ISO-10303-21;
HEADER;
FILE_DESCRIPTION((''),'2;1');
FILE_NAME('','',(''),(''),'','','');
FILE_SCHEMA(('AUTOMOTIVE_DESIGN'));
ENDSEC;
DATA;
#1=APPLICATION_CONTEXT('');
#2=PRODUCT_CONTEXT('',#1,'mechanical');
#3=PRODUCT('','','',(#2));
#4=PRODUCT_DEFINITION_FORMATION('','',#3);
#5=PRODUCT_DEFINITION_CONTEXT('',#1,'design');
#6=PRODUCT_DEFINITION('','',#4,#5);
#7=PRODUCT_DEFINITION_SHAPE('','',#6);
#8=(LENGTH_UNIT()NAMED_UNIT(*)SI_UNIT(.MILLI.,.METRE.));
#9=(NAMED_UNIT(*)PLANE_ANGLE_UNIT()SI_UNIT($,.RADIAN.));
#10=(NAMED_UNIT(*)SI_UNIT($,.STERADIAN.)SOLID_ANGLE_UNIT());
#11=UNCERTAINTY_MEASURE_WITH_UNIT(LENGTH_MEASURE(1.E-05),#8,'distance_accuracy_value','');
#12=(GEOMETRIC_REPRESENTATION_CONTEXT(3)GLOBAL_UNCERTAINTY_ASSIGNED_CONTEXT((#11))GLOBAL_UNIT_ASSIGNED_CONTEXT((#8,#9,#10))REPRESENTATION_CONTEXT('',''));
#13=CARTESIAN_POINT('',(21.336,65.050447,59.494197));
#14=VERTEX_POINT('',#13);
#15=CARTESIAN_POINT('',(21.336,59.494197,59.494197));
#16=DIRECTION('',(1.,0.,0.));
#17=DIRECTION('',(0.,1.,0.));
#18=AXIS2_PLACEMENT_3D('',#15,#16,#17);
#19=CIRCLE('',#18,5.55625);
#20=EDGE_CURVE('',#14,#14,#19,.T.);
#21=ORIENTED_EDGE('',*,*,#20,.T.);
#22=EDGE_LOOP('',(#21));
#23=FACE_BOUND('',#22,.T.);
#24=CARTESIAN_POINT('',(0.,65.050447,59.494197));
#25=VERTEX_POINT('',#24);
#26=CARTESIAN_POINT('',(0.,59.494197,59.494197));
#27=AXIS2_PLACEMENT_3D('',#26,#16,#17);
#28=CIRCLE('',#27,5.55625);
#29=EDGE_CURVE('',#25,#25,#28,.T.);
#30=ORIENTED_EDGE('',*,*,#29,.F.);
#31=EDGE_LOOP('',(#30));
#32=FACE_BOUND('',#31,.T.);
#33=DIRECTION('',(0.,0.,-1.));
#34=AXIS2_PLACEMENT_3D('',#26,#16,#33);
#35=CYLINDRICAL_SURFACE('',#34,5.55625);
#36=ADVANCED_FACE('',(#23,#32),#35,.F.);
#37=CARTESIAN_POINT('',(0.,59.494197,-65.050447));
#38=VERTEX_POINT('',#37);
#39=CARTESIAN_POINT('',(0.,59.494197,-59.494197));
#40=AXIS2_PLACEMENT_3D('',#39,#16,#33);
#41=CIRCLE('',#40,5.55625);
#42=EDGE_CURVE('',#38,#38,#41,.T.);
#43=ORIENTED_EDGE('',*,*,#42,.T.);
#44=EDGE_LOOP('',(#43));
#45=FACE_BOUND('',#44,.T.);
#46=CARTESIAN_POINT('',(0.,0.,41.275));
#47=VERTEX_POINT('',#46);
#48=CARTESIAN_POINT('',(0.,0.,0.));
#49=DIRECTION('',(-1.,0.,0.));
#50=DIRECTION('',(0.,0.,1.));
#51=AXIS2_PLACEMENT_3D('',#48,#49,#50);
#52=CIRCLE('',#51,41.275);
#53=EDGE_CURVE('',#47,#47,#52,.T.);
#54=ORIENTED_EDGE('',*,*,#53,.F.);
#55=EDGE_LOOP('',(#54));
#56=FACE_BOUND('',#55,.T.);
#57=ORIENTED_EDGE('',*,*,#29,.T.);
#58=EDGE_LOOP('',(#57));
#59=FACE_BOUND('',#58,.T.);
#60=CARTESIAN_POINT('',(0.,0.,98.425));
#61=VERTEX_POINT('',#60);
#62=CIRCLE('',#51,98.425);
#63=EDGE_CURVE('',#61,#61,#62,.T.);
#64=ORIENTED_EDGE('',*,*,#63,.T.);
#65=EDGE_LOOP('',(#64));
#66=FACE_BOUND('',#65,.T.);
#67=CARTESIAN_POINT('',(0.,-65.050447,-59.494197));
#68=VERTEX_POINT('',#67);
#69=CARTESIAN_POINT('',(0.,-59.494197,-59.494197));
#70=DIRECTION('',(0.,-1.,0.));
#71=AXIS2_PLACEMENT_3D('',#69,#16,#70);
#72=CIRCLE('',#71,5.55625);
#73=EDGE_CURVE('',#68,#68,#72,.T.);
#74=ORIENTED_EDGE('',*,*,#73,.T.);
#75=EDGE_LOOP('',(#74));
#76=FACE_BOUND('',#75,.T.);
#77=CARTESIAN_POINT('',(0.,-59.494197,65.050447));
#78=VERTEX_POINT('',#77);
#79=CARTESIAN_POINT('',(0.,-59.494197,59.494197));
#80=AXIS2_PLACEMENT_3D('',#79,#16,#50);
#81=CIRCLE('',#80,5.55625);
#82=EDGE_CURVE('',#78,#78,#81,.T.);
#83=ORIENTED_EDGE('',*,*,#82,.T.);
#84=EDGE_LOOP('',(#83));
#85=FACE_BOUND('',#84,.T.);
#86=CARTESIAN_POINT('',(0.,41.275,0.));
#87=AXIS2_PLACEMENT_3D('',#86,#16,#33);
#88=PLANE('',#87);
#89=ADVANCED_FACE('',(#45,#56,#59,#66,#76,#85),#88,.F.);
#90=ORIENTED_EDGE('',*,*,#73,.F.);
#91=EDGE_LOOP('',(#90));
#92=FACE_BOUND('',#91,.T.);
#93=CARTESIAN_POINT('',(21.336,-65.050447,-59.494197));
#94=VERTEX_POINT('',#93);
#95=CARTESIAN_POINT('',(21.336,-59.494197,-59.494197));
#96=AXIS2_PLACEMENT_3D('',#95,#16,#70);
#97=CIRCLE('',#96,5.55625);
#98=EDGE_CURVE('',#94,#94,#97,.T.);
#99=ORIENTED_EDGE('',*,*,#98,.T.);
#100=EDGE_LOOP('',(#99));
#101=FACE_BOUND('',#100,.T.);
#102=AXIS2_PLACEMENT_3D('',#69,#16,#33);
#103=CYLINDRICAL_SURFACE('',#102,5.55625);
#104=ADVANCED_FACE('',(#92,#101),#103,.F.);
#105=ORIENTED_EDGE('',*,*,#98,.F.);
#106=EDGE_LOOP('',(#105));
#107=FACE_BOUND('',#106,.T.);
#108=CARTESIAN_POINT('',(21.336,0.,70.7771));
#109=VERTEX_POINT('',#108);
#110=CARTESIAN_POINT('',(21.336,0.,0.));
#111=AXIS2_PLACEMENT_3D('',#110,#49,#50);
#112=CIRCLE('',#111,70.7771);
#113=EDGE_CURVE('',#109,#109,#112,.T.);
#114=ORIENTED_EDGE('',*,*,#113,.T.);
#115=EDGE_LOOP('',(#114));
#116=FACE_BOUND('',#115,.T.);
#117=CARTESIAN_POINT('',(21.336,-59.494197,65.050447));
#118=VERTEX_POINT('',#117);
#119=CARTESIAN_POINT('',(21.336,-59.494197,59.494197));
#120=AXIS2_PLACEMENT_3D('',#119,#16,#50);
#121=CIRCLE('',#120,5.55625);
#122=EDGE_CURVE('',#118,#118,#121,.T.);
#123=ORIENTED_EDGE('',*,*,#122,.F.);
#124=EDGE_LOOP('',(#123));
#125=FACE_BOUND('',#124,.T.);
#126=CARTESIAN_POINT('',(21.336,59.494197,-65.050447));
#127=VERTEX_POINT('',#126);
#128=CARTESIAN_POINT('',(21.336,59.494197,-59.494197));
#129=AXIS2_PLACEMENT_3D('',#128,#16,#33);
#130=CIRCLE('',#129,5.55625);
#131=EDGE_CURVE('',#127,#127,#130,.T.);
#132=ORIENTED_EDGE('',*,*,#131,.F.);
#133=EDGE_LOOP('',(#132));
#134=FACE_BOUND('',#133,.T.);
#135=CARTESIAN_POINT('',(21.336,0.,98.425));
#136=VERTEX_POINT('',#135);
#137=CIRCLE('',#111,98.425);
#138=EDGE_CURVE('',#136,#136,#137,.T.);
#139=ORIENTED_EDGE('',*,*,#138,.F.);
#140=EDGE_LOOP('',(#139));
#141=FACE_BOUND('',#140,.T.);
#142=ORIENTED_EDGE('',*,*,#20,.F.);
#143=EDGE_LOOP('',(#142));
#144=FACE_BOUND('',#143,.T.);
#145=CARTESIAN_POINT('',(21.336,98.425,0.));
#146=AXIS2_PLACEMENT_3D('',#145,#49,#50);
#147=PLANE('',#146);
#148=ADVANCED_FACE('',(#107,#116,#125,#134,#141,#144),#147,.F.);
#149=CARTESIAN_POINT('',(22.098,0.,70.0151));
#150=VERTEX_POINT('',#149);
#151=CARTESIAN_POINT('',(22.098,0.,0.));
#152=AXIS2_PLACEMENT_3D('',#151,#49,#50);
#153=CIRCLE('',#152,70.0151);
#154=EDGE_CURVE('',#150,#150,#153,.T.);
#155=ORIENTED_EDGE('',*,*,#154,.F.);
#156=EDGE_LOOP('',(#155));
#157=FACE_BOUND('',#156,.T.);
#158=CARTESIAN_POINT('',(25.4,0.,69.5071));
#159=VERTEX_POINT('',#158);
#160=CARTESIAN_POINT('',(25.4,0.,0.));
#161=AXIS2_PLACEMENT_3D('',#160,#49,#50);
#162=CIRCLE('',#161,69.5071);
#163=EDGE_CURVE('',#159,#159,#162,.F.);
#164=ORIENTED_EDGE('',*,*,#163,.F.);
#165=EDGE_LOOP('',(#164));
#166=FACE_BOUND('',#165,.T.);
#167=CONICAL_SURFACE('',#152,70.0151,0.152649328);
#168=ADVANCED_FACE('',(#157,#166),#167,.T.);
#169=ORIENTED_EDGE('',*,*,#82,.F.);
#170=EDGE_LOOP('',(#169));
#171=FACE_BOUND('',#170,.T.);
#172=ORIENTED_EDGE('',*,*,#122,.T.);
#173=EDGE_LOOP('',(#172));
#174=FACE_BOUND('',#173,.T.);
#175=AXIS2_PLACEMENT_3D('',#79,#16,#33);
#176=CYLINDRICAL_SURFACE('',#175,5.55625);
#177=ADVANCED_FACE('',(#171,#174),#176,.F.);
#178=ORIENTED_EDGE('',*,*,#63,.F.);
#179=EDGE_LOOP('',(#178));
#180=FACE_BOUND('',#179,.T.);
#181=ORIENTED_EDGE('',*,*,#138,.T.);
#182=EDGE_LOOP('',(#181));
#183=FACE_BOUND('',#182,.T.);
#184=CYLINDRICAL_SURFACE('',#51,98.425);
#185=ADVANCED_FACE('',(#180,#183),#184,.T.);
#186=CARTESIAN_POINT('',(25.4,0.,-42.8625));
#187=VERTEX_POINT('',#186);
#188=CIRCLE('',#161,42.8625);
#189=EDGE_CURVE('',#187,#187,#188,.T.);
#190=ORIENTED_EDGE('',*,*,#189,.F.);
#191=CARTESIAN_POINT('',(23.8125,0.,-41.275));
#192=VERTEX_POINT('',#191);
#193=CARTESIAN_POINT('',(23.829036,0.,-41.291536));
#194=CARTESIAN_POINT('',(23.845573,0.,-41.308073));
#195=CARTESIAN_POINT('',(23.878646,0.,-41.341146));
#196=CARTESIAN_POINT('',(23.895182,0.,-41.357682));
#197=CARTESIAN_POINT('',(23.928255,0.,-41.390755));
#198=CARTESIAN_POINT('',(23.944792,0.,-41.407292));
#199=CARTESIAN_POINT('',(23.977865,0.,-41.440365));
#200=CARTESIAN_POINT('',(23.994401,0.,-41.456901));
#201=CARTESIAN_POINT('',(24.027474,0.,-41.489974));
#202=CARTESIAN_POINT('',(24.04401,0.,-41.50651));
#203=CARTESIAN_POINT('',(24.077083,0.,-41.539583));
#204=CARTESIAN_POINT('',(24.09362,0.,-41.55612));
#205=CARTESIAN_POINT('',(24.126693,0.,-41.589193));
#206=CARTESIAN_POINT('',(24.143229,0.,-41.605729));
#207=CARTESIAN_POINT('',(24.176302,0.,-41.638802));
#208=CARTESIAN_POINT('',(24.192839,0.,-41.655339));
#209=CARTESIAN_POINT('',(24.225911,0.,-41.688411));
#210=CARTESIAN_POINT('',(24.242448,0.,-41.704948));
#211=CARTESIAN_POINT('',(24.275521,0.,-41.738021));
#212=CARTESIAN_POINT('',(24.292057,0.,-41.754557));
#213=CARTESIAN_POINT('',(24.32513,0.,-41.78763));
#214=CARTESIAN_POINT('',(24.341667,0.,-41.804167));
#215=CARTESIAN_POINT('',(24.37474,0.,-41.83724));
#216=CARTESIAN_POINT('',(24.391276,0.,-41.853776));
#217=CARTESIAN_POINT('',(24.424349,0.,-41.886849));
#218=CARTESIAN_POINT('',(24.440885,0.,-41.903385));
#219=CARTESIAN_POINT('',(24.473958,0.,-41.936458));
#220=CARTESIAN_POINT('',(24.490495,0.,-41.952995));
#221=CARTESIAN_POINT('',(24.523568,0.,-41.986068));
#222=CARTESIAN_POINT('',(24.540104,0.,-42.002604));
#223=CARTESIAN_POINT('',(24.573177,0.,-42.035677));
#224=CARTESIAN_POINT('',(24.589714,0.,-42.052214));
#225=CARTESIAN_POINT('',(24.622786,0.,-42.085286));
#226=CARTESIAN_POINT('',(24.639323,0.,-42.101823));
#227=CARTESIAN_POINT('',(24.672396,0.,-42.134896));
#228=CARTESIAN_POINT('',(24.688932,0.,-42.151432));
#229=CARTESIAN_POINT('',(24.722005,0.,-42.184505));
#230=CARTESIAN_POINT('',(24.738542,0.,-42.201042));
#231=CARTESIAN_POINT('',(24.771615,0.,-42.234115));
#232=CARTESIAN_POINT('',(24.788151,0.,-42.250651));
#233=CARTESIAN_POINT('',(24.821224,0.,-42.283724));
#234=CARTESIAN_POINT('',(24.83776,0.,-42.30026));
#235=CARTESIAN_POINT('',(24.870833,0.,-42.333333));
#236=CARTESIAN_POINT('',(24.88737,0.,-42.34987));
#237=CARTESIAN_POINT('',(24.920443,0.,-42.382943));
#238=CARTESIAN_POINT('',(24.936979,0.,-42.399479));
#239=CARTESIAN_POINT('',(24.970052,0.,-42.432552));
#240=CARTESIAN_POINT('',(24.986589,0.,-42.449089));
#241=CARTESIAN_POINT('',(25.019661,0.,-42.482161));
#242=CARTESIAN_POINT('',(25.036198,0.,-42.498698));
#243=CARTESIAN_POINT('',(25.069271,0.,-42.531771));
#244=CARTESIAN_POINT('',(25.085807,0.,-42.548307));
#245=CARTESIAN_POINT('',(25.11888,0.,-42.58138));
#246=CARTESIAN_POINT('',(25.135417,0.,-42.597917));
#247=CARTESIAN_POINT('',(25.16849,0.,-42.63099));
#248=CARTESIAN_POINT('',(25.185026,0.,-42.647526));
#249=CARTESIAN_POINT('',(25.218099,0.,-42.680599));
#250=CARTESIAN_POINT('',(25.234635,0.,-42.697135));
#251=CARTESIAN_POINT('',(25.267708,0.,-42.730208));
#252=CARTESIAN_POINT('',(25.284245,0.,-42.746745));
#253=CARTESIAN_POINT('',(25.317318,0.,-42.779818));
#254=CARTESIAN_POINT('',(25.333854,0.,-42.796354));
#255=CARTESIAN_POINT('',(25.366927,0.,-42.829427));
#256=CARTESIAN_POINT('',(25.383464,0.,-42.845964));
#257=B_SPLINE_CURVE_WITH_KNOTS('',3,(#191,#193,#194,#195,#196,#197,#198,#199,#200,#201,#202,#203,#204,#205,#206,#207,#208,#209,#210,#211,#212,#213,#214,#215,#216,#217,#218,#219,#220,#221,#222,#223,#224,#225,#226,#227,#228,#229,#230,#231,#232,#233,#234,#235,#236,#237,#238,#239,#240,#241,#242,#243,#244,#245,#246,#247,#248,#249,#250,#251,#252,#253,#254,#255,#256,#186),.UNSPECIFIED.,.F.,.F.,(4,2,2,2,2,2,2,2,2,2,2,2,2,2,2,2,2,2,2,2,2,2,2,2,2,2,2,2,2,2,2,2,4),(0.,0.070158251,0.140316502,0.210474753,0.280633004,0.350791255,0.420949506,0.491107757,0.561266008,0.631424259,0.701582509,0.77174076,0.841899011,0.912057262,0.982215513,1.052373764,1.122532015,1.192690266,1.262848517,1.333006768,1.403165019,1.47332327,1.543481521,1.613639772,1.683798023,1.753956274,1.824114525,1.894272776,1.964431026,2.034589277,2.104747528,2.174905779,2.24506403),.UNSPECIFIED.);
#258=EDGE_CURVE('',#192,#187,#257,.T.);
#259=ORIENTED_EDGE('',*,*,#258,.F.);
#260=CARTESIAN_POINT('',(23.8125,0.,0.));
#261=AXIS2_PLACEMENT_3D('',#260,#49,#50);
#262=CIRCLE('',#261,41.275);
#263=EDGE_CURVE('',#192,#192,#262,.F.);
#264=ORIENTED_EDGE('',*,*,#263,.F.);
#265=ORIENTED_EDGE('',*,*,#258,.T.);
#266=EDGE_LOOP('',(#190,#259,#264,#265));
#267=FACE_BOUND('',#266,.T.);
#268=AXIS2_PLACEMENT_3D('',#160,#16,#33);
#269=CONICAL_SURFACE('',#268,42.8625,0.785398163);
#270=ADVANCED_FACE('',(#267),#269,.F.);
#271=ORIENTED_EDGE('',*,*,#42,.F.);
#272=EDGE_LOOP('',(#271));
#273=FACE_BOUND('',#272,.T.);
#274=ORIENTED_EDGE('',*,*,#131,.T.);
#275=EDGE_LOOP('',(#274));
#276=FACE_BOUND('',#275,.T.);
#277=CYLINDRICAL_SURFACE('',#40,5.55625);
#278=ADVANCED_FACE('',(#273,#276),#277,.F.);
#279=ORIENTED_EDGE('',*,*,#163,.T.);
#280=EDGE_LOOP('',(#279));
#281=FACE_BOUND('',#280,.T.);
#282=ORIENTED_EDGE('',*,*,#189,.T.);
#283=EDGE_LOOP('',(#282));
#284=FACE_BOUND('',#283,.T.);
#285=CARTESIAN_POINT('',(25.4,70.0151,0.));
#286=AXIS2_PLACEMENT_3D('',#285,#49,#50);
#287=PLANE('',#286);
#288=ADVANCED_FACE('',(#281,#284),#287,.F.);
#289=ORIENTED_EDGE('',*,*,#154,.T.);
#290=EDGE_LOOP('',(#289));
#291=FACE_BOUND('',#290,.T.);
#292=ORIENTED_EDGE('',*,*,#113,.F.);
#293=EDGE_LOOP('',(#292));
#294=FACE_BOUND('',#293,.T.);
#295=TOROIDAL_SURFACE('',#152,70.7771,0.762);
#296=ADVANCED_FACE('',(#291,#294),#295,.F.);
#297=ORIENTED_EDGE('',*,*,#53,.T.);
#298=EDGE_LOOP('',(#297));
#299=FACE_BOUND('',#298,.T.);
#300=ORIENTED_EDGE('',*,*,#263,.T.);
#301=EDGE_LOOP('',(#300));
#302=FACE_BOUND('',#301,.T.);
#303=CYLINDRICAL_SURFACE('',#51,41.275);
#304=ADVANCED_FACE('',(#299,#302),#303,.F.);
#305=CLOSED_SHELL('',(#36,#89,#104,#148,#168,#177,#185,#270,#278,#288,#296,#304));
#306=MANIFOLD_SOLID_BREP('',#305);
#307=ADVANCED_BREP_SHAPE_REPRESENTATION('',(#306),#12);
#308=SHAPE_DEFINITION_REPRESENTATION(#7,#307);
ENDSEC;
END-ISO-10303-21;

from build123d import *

# Parameters (mm, degrees)
SKETCH2_R          = 5.55625
CUT_EXTRUDE1_DEPTH = 141.819693743
CIRPATTERN1_COUNT  = 4
CHAMFER1_SIZE      = 0.508
CHAMFER1_SIZE2     = 3.302
CHAMFER2_SIZE      = 1.5875
FILLET1_R          = 0.762


with BuildPart() as part:
    # Sketch1 → Revolve1 (revolve)
    with BuildSketch(Plane.XY, mode=Mode.PRIVATE) as revolve1_sk:
        Polygon((0, 41.275), (0, 98.425), (21.336, 98.425), (21.336, 70.0151), (25.4, 70.0151), (25.4, 41.275), align=None)
    revolve(revolve1_sk.sketch.rotate(Axis((0, 0, 0), (1, 0, 0)), 90), axis=Axis((0, 0, 0), (1, 0, 0)))

    # Sketch2 → Cut-Extrude1 (cut, through all)
    with BuildSketch(Plane(origin=(21.336, 0, 0), x_dir=(0, 0, -1), z_dir=(1, 0, 0))):
        with Locations((59.494196802, 59.494196802)):
            Circle(SKETCH2_R)
    cut_extrude1 = extrude(amount=-CUT_EXTRUDE1_DEPTH, mode=Mode.SUBTRACT)

    # CirPattern1: Cut-Extrude1 ×4 about axis
    cirpattern1_axis = Axis((0, 0, 0), (1, 0, 0))
    for i in range(1, CIRPATTERN1_COUNT):
        add(cut_extrude1.rotate(cirpattern1_axis, i * 360 / CIRPATTERN1_COUNT), mode=Mode.SUBTRACT)

    # Chamfer1
    chamfer1_edges = [part.edges().sort_by_distance(p)[0] for p in [
        (25.4, 0, -70.0151),
    ]]
    chamfer1_side = [part.faces().sort_by_distance(p)[0] for p in [
        (25.4, 0, -68.03477392),
    ]]
    chamfer(chamfer1_edges, length=CHAMFER1_SIZE, length2=CHAMFER1_SIZE2, reference=chamfer1_side[0])

    # Chamfer2
    chamfer2_edges = [part.edges().sort_by_distance(p)[0] for p in [
        (25.4, 0, -41.275),
    ]]
    chamfer(chamfer2_edges, length=CHAMFER2_SIZE)

    # Fillet1
    fillet1_edges = [part.edges().sort_by_distance(p)[0] for p in [
        (21.336, 0, -70.0151),
    ]]
    fillet(fillet1_edges, radius=FILLET1_R - 0.0001)  # a hair under: the kernel refuses the full size


solid = part.part
